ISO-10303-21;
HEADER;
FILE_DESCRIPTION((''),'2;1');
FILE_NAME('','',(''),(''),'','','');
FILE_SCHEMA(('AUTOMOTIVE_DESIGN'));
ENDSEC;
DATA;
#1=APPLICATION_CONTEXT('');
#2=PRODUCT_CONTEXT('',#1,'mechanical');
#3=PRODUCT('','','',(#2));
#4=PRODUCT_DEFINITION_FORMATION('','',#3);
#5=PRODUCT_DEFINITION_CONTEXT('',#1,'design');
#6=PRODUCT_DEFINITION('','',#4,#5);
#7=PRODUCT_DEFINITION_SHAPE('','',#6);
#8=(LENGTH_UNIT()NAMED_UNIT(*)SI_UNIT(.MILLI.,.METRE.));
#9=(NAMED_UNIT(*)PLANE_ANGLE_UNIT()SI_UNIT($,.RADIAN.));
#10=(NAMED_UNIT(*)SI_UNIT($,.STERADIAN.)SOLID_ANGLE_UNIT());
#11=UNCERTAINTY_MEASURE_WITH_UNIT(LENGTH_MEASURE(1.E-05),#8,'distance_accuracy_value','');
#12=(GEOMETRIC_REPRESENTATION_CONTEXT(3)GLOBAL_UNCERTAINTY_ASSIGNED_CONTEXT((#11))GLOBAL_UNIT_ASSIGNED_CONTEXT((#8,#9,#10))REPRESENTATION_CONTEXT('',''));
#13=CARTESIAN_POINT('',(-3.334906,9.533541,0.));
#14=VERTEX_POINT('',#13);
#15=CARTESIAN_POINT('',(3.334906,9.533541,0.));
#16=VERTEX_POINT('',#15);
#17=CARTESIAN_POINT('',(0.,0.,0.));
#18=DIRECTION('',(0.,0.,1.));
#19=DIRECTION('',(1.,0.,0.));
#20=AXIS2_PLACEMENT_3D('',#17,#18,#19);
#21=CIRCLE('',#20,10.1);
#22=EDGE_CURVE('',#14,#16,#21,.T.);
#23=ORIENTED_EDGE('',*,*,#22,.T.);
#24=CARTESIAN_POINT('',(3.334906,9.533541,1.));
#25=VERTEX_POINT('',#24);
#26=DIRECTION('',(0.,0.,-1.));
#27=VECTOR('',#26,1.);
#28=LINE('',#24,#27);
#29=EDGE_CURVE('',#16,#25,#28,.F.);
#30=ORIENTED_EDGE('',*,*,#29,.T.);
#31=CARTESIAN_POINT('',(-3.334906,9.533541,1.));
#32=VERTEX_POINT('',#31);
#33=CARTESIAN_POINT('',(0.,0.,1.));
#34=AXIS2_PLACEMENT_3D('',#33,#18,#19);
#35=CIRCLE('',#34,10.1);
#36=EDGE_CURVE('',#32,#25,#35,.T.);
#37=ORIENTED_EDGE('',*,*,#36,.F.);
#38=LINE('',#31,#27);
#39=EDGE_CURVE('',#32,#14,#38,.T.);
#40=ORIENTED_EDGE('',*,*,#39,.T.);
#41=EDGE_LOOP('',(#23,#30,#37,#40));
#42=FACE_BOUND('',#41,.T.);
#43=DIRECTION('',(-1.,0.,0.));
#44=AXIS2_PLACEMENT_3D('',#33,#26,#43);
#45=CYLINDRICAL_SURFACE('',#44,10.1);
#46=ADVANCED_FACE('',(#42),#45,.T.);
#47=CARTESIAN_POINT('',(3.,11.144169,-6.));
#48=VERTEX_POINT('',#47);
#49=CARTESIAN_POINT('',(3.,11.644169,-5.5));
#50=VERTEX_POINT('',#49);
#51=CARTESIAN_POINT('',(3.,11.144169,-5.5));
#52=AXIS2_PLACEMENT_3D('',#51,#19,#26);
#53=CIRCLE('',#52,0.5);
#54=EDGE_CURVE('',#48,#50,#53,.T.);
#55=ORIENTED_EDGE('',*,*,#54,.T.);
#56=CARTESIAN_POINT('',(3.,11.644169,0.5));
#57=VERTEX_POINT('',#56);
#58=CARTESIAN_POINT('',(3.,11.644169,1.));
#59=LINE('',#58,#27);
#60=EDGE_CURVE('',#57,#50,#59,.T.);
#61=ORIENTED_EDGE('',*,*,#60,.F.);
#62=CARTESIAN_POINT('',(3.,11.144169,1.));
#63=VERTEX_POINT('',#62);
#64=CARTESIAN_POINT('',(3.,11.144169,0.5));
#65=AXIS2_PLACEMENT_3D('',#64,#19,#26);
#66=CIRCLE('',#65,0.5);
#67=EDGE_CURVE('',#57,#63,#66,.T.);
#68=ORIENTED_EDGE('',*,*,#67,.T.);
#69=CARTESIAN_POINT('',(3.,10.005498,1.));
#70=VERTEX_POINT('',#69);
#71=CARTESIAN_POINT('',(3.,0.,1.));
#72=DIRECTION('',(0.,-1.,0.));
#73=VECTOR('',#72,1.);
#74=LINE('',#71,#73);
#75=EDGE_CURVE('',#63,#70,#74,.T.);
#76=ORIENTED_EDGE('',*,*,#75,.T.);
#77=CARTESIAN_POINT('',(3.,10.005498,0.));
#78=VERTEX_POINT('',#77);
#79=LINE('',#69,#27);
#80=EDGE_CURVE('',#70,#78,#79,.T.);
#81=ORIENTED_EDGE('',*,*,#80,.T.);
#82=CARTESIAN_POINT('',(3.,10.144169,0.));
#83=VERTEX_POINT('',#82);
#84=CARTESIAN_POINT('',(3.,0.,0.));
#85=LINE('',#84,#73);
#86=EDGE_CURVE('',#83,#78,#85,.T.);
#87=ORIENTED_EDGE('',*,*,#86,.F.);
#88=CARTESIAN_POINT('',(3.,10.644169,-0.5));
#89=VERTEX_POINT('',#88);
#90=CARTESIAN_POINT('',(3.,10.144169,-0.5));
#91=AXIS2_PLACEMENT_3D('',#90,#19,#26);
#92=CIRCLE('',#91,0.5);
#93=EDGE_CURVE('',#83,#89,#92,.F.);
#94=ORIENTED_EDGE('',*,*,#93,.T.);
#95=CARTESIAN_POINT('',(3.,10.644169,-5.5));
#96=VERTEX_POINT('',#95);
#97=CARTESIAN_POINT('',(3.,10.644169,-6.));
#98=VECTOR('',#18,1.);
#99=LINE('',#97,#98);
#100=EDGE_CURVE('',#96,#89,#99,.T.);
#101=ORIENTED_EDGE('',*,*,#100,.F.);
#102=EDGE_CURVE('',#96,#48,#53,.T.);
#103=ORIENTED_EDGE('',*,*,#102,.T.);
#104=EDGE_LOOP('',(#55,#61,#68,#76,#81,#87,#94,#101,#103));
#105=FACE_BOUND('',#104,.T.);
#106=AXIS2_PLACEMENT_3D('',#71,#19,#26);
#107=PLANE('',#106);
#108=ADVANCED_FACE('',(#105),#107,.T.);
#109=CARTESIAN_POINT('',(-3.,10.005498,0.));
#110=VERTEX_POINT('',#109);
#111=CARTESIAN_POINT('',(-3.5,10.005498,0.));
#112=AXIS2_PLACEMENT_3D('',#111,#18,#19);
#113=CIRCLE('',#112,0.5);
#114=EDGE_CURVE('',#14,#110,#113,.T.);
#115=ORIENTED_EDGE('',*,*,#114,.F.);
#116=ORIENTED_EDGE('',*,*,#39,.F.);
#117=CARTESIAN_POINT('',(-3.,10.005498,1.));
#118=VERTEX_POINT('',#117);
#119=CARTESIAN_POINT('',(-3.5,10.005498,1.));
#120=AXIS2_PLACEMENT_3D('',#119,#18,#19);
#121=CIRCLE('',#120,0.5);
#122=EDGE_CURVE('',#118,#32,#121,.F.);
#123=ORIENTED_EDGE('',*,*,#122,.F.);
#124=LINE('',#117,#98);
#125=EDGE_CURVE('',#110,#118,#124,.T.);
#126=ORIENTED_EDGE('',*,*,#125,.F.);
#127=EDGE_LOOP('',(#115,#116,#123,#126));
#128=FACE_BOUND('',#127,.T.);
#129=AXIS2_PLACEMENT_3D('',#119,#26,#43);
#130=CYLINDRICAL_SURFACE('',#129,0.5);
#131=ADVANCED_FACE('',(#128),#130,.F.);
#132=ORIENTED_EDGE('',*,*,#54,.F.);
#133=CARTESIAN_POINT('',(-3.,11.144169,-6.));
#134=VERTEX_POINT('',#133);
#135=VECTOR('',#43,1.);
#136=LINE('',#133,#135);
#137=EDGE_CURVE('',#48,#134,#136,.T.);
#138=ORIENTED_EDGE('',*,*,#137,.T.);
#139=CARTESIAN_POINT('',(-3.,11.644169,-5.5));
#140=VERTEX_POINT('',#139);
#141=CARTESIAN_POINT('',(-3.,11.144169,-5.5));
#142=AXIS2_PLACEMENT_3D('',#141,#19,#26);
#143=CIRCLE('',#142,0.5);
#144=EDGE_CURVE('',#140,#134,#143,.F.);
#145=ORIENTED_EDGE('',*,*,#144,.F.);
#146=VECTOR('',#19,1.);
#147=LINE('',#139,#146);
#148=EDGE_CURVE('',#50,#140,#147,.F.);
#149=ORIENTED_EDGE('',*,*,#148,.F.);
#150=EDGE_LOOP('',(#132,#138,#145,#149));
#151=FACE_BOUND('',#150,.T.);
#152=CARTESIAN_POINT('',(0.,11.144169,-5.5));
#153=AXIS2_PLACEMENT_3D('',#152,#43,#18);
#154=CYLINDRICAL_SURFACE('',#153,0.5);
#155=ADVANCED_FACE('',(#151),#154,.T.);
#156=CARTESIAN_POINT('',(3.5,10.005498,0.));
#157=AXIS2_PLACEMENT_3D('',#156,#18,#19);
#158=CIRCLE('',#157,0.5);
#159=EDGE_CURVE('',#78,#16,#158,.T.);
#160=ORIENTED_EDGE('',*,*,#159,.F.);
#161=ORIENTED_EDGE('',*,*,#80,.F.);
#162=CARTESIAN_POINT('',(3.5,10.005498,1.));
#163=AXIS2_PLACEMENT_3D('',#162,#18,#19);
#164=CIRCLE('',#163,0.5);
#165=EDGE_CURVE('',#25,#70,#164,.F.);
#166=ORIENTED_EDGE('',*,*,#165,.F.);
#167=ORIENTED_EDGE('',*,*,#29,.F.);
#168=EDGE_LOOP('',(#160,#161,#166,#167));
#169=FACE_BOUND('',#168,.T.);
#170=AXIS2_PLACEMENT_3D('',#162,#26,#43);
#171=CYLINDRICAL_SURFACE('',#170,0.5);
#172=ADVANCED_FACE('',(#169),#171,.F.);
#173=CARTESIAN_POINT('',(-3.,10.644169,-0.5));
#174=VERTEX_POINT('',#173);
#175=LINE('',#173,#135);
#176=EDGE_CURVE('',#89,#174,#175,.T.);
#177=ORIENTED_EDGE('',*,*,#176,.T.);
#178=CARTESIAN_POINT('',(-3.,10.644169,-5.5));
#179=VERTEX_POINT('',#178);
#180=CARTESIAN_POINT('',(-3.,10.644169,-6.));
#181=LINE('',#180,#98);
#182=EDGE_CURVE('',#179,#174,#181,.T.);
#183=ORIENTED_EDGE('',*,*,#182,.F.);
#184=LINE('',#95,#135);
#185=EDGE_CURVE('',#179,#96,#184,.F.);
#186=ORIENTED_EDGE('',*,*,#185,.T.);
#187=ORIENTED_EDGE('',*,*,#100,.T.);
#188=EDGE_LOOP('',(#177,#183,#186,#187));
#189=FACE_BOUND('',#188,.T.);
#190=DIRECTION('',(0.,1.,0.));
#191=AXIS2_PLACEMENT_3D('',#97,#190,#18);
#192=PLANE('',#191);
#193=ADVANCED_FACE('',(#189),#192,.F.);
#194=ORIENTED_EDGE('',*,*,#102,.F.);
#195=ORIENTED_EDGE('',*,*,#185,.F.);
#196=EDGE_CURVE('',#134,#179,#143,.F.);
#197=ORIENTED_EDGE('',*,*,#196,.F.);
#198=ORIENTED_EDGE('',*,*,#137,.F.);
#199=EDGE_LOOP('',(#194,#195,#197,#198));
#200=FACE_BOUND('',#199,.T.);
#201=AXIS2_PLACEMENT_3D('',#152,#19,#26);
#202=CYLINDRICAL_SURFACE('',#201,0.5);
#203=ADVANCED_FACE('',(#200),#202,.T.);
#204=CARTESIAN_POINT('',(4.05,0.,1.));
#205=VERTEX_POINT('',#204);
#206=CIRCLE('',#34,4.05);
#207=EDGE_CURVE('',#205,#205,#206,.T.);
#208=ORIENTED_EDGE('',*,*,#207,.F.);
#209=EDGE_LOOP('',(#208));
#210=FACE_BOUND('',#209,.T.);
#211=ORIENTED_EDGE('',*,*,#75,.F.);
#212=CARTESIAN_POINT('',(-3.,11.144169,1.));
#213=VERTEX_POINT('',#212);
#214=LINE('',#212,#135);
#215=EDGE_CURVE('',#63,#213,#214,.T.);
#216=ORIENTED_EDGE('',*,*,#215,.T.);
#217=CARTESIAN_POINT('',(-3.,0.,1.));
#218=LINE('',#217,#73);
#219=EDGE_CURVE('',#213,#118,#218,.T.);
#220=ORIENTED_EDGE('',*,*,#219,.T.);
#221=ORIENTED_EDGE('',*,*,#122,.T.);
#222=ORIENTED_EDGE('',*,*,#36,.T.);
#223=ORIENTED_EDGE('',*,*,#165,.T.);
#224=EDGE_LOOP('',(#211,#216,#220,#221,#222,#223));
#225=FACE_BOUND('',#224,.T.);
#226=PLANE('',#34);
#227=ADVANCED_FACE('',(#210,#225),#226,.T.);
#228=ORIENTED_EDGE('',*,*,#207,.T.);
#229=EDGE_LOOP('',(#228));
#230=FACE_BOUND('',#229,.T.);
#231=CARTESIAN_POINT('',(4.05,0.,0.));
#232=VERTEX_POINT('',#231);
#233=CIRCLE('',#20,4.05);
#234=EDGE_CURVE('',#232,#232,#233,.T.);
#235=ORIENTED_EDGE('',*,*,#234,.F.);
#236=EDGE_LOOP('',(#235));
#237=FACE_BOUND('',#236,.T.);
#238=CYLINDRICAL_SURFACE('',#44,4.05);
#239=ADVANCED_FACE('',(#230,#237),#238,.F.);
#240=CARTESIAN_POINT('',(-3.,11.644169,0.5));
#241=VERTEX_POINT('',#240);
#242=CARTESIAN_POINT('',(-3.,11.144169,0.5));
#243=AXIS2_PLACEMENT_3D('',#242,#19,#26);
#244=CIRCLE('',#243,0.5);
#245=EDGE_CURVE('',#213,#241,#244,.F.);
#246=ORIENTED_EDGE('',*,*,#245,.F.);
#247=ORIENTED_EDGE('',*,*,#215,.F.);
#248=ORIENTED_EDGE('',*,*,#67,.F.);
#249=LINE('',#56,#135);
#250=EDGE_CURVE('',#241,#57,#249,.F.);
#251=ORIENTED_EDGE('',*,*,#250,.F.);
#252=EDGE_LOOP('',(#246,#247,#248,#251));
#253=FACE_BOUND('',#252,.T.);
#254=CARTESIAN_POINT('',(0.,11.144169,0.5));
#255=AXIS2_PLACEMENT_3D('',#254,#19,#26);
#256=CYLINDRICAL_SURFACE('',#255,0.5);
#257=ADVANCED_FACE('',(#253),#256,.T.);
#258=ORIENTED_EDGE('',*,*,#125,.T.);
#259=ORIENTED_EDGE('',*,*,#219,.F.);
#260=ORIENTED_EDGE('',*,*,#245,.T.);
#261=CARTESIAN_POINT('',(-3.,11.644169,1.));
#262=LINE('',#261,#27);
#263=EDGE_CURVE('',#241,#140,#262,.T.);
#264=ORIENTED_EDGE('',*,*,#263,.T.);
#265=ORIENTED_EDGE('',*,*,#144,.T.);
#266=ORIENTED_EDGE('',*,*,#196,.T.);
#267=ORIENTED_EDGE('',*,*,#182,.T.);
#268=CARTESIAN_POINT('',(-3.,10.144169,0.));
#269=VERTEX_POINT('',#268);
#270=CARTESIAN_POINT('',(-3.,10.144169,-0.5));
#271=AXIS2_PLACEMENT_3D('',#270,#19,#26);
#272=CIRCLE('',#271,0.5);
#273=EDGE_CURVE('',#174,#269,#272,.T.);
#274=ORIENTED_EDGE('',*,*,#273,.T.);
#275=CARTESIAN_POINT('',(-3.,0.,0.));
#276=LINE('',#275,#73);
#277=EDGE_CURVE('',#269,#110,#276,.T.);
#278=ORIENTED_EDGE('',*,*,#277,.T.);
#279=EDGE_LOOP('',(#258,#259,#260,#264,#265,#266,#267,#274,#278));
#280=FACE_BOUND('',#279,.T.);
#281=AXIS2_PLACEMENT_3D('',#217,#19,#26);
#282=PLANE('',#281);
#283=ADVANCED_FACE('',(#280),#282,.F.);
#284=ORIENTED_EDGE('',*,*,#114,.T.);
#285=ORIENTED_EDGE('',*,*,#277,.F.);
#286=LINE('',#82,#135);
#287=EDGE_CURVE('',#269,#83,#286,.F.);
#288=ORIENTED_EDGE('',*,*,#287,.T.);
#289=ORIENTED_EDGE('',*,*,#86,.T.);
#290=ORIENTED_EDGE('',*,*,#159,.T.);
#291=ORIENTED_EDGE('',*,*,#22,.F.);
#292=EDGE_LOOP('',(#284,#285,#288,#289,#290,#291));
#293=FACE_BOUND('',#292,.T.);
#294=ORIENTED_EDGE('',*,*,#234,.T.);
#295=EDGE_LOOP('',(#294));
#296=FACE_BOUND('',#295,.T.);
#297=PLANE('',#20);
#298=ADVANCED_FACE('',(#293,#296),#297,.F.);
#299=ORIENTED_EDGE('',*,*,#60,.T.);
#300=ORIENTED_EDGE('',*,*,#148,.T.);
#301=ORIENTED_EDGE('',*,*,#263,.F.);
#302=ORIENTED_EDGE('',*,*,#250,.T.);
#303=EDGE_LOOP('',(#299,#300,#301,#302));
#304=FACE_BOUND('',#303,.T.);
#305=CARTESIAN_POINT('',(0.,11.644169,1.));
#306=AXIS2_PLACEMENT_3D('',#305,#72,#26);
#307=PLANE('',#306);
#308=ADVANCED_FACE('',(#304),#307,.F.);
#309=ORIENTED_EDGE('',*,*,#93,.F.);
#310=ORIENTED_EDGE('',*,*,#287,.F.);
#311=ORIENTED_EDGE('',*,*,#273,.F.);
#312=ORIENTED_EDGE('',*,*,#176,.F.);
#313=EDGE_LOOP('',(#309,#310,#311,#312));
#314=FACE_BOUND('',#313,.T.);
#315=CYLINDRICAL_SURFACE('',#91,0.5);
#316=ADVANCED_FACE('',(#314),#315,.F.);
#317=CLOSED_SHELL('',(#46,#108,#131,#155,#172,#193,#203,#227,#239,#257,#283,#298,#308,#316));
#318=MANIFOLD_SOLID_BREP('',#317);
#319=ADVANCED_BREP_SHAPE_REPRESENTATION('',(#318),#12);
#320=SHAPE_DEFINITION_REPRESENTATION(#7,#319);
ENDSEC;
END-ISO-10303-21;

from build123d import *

# Parameters (mm, degrees)
SZKIC1_R                    = 4.05
DODANIE_WYCI_GNI_CIE3_DEPTH = 1
SZKIC5_W                    = 6
SZKIC5_H                    = 1
DODANIE_WYCI_GNI_CIE5_DEPTH = 6
ZAOKR_GLENIE3_R             = 0.5


with BuildPart() as part:
    # Szkic1 → Dodanie-wyciągnięcie3 (new body)
    with BuildSketch(Plane.XY):
        with BuildLine():
            Line((3, 11.644169223), (-3, 11.644169223))
            Line((-3, 11.644169223), (-3, 9.644169223))
            ThreePointArc((-3, 9.644169223), (0, -10.1), (3, 9.644169223))
            Line((3, 9.644169223), (3, 11.644169223))
        make_face()
        Circle(SZKIC1_R, mode=Mode.SUBTRACT)
    extrude(amount=DODANIE_WYCI_GNI_CIE3_DEPTH)

    # Szkic5 → Dodanie-wyciągnięcie5 (add)
    with BuildSketch(Plane(origin=(0, 0, 0), x_dir=(-1, 0, 0), z_dir=(0, 0, -1))):
        with Locations((0, 11.144169223)):
            Rectangle(SZKIC5_W, SZKIC5_H)
    extrude(amount=DODANIE_WYCI_GNI_CIE5_DEPTH)

    # Zaokrąglenie3
    zaokr_glenie3_edges = [part.edges().sort_by_distance(p)[0] for p in [
        (-3, 9.644169223, 0.5),
        (3, 9.644169223, 0.5),
        (0, 11.644169223, -6),
        (0, 10.644169223, -6),
        (0, 10.644169223, 0),
        (0, 11.644169223, 1),
    ]]
    fillet(zaokr_glenie3_edges, radius=ZAOKR_GLENIE3_R - 0.0001)  # a hair under: the kernel refuses the full size


solid = part.part
